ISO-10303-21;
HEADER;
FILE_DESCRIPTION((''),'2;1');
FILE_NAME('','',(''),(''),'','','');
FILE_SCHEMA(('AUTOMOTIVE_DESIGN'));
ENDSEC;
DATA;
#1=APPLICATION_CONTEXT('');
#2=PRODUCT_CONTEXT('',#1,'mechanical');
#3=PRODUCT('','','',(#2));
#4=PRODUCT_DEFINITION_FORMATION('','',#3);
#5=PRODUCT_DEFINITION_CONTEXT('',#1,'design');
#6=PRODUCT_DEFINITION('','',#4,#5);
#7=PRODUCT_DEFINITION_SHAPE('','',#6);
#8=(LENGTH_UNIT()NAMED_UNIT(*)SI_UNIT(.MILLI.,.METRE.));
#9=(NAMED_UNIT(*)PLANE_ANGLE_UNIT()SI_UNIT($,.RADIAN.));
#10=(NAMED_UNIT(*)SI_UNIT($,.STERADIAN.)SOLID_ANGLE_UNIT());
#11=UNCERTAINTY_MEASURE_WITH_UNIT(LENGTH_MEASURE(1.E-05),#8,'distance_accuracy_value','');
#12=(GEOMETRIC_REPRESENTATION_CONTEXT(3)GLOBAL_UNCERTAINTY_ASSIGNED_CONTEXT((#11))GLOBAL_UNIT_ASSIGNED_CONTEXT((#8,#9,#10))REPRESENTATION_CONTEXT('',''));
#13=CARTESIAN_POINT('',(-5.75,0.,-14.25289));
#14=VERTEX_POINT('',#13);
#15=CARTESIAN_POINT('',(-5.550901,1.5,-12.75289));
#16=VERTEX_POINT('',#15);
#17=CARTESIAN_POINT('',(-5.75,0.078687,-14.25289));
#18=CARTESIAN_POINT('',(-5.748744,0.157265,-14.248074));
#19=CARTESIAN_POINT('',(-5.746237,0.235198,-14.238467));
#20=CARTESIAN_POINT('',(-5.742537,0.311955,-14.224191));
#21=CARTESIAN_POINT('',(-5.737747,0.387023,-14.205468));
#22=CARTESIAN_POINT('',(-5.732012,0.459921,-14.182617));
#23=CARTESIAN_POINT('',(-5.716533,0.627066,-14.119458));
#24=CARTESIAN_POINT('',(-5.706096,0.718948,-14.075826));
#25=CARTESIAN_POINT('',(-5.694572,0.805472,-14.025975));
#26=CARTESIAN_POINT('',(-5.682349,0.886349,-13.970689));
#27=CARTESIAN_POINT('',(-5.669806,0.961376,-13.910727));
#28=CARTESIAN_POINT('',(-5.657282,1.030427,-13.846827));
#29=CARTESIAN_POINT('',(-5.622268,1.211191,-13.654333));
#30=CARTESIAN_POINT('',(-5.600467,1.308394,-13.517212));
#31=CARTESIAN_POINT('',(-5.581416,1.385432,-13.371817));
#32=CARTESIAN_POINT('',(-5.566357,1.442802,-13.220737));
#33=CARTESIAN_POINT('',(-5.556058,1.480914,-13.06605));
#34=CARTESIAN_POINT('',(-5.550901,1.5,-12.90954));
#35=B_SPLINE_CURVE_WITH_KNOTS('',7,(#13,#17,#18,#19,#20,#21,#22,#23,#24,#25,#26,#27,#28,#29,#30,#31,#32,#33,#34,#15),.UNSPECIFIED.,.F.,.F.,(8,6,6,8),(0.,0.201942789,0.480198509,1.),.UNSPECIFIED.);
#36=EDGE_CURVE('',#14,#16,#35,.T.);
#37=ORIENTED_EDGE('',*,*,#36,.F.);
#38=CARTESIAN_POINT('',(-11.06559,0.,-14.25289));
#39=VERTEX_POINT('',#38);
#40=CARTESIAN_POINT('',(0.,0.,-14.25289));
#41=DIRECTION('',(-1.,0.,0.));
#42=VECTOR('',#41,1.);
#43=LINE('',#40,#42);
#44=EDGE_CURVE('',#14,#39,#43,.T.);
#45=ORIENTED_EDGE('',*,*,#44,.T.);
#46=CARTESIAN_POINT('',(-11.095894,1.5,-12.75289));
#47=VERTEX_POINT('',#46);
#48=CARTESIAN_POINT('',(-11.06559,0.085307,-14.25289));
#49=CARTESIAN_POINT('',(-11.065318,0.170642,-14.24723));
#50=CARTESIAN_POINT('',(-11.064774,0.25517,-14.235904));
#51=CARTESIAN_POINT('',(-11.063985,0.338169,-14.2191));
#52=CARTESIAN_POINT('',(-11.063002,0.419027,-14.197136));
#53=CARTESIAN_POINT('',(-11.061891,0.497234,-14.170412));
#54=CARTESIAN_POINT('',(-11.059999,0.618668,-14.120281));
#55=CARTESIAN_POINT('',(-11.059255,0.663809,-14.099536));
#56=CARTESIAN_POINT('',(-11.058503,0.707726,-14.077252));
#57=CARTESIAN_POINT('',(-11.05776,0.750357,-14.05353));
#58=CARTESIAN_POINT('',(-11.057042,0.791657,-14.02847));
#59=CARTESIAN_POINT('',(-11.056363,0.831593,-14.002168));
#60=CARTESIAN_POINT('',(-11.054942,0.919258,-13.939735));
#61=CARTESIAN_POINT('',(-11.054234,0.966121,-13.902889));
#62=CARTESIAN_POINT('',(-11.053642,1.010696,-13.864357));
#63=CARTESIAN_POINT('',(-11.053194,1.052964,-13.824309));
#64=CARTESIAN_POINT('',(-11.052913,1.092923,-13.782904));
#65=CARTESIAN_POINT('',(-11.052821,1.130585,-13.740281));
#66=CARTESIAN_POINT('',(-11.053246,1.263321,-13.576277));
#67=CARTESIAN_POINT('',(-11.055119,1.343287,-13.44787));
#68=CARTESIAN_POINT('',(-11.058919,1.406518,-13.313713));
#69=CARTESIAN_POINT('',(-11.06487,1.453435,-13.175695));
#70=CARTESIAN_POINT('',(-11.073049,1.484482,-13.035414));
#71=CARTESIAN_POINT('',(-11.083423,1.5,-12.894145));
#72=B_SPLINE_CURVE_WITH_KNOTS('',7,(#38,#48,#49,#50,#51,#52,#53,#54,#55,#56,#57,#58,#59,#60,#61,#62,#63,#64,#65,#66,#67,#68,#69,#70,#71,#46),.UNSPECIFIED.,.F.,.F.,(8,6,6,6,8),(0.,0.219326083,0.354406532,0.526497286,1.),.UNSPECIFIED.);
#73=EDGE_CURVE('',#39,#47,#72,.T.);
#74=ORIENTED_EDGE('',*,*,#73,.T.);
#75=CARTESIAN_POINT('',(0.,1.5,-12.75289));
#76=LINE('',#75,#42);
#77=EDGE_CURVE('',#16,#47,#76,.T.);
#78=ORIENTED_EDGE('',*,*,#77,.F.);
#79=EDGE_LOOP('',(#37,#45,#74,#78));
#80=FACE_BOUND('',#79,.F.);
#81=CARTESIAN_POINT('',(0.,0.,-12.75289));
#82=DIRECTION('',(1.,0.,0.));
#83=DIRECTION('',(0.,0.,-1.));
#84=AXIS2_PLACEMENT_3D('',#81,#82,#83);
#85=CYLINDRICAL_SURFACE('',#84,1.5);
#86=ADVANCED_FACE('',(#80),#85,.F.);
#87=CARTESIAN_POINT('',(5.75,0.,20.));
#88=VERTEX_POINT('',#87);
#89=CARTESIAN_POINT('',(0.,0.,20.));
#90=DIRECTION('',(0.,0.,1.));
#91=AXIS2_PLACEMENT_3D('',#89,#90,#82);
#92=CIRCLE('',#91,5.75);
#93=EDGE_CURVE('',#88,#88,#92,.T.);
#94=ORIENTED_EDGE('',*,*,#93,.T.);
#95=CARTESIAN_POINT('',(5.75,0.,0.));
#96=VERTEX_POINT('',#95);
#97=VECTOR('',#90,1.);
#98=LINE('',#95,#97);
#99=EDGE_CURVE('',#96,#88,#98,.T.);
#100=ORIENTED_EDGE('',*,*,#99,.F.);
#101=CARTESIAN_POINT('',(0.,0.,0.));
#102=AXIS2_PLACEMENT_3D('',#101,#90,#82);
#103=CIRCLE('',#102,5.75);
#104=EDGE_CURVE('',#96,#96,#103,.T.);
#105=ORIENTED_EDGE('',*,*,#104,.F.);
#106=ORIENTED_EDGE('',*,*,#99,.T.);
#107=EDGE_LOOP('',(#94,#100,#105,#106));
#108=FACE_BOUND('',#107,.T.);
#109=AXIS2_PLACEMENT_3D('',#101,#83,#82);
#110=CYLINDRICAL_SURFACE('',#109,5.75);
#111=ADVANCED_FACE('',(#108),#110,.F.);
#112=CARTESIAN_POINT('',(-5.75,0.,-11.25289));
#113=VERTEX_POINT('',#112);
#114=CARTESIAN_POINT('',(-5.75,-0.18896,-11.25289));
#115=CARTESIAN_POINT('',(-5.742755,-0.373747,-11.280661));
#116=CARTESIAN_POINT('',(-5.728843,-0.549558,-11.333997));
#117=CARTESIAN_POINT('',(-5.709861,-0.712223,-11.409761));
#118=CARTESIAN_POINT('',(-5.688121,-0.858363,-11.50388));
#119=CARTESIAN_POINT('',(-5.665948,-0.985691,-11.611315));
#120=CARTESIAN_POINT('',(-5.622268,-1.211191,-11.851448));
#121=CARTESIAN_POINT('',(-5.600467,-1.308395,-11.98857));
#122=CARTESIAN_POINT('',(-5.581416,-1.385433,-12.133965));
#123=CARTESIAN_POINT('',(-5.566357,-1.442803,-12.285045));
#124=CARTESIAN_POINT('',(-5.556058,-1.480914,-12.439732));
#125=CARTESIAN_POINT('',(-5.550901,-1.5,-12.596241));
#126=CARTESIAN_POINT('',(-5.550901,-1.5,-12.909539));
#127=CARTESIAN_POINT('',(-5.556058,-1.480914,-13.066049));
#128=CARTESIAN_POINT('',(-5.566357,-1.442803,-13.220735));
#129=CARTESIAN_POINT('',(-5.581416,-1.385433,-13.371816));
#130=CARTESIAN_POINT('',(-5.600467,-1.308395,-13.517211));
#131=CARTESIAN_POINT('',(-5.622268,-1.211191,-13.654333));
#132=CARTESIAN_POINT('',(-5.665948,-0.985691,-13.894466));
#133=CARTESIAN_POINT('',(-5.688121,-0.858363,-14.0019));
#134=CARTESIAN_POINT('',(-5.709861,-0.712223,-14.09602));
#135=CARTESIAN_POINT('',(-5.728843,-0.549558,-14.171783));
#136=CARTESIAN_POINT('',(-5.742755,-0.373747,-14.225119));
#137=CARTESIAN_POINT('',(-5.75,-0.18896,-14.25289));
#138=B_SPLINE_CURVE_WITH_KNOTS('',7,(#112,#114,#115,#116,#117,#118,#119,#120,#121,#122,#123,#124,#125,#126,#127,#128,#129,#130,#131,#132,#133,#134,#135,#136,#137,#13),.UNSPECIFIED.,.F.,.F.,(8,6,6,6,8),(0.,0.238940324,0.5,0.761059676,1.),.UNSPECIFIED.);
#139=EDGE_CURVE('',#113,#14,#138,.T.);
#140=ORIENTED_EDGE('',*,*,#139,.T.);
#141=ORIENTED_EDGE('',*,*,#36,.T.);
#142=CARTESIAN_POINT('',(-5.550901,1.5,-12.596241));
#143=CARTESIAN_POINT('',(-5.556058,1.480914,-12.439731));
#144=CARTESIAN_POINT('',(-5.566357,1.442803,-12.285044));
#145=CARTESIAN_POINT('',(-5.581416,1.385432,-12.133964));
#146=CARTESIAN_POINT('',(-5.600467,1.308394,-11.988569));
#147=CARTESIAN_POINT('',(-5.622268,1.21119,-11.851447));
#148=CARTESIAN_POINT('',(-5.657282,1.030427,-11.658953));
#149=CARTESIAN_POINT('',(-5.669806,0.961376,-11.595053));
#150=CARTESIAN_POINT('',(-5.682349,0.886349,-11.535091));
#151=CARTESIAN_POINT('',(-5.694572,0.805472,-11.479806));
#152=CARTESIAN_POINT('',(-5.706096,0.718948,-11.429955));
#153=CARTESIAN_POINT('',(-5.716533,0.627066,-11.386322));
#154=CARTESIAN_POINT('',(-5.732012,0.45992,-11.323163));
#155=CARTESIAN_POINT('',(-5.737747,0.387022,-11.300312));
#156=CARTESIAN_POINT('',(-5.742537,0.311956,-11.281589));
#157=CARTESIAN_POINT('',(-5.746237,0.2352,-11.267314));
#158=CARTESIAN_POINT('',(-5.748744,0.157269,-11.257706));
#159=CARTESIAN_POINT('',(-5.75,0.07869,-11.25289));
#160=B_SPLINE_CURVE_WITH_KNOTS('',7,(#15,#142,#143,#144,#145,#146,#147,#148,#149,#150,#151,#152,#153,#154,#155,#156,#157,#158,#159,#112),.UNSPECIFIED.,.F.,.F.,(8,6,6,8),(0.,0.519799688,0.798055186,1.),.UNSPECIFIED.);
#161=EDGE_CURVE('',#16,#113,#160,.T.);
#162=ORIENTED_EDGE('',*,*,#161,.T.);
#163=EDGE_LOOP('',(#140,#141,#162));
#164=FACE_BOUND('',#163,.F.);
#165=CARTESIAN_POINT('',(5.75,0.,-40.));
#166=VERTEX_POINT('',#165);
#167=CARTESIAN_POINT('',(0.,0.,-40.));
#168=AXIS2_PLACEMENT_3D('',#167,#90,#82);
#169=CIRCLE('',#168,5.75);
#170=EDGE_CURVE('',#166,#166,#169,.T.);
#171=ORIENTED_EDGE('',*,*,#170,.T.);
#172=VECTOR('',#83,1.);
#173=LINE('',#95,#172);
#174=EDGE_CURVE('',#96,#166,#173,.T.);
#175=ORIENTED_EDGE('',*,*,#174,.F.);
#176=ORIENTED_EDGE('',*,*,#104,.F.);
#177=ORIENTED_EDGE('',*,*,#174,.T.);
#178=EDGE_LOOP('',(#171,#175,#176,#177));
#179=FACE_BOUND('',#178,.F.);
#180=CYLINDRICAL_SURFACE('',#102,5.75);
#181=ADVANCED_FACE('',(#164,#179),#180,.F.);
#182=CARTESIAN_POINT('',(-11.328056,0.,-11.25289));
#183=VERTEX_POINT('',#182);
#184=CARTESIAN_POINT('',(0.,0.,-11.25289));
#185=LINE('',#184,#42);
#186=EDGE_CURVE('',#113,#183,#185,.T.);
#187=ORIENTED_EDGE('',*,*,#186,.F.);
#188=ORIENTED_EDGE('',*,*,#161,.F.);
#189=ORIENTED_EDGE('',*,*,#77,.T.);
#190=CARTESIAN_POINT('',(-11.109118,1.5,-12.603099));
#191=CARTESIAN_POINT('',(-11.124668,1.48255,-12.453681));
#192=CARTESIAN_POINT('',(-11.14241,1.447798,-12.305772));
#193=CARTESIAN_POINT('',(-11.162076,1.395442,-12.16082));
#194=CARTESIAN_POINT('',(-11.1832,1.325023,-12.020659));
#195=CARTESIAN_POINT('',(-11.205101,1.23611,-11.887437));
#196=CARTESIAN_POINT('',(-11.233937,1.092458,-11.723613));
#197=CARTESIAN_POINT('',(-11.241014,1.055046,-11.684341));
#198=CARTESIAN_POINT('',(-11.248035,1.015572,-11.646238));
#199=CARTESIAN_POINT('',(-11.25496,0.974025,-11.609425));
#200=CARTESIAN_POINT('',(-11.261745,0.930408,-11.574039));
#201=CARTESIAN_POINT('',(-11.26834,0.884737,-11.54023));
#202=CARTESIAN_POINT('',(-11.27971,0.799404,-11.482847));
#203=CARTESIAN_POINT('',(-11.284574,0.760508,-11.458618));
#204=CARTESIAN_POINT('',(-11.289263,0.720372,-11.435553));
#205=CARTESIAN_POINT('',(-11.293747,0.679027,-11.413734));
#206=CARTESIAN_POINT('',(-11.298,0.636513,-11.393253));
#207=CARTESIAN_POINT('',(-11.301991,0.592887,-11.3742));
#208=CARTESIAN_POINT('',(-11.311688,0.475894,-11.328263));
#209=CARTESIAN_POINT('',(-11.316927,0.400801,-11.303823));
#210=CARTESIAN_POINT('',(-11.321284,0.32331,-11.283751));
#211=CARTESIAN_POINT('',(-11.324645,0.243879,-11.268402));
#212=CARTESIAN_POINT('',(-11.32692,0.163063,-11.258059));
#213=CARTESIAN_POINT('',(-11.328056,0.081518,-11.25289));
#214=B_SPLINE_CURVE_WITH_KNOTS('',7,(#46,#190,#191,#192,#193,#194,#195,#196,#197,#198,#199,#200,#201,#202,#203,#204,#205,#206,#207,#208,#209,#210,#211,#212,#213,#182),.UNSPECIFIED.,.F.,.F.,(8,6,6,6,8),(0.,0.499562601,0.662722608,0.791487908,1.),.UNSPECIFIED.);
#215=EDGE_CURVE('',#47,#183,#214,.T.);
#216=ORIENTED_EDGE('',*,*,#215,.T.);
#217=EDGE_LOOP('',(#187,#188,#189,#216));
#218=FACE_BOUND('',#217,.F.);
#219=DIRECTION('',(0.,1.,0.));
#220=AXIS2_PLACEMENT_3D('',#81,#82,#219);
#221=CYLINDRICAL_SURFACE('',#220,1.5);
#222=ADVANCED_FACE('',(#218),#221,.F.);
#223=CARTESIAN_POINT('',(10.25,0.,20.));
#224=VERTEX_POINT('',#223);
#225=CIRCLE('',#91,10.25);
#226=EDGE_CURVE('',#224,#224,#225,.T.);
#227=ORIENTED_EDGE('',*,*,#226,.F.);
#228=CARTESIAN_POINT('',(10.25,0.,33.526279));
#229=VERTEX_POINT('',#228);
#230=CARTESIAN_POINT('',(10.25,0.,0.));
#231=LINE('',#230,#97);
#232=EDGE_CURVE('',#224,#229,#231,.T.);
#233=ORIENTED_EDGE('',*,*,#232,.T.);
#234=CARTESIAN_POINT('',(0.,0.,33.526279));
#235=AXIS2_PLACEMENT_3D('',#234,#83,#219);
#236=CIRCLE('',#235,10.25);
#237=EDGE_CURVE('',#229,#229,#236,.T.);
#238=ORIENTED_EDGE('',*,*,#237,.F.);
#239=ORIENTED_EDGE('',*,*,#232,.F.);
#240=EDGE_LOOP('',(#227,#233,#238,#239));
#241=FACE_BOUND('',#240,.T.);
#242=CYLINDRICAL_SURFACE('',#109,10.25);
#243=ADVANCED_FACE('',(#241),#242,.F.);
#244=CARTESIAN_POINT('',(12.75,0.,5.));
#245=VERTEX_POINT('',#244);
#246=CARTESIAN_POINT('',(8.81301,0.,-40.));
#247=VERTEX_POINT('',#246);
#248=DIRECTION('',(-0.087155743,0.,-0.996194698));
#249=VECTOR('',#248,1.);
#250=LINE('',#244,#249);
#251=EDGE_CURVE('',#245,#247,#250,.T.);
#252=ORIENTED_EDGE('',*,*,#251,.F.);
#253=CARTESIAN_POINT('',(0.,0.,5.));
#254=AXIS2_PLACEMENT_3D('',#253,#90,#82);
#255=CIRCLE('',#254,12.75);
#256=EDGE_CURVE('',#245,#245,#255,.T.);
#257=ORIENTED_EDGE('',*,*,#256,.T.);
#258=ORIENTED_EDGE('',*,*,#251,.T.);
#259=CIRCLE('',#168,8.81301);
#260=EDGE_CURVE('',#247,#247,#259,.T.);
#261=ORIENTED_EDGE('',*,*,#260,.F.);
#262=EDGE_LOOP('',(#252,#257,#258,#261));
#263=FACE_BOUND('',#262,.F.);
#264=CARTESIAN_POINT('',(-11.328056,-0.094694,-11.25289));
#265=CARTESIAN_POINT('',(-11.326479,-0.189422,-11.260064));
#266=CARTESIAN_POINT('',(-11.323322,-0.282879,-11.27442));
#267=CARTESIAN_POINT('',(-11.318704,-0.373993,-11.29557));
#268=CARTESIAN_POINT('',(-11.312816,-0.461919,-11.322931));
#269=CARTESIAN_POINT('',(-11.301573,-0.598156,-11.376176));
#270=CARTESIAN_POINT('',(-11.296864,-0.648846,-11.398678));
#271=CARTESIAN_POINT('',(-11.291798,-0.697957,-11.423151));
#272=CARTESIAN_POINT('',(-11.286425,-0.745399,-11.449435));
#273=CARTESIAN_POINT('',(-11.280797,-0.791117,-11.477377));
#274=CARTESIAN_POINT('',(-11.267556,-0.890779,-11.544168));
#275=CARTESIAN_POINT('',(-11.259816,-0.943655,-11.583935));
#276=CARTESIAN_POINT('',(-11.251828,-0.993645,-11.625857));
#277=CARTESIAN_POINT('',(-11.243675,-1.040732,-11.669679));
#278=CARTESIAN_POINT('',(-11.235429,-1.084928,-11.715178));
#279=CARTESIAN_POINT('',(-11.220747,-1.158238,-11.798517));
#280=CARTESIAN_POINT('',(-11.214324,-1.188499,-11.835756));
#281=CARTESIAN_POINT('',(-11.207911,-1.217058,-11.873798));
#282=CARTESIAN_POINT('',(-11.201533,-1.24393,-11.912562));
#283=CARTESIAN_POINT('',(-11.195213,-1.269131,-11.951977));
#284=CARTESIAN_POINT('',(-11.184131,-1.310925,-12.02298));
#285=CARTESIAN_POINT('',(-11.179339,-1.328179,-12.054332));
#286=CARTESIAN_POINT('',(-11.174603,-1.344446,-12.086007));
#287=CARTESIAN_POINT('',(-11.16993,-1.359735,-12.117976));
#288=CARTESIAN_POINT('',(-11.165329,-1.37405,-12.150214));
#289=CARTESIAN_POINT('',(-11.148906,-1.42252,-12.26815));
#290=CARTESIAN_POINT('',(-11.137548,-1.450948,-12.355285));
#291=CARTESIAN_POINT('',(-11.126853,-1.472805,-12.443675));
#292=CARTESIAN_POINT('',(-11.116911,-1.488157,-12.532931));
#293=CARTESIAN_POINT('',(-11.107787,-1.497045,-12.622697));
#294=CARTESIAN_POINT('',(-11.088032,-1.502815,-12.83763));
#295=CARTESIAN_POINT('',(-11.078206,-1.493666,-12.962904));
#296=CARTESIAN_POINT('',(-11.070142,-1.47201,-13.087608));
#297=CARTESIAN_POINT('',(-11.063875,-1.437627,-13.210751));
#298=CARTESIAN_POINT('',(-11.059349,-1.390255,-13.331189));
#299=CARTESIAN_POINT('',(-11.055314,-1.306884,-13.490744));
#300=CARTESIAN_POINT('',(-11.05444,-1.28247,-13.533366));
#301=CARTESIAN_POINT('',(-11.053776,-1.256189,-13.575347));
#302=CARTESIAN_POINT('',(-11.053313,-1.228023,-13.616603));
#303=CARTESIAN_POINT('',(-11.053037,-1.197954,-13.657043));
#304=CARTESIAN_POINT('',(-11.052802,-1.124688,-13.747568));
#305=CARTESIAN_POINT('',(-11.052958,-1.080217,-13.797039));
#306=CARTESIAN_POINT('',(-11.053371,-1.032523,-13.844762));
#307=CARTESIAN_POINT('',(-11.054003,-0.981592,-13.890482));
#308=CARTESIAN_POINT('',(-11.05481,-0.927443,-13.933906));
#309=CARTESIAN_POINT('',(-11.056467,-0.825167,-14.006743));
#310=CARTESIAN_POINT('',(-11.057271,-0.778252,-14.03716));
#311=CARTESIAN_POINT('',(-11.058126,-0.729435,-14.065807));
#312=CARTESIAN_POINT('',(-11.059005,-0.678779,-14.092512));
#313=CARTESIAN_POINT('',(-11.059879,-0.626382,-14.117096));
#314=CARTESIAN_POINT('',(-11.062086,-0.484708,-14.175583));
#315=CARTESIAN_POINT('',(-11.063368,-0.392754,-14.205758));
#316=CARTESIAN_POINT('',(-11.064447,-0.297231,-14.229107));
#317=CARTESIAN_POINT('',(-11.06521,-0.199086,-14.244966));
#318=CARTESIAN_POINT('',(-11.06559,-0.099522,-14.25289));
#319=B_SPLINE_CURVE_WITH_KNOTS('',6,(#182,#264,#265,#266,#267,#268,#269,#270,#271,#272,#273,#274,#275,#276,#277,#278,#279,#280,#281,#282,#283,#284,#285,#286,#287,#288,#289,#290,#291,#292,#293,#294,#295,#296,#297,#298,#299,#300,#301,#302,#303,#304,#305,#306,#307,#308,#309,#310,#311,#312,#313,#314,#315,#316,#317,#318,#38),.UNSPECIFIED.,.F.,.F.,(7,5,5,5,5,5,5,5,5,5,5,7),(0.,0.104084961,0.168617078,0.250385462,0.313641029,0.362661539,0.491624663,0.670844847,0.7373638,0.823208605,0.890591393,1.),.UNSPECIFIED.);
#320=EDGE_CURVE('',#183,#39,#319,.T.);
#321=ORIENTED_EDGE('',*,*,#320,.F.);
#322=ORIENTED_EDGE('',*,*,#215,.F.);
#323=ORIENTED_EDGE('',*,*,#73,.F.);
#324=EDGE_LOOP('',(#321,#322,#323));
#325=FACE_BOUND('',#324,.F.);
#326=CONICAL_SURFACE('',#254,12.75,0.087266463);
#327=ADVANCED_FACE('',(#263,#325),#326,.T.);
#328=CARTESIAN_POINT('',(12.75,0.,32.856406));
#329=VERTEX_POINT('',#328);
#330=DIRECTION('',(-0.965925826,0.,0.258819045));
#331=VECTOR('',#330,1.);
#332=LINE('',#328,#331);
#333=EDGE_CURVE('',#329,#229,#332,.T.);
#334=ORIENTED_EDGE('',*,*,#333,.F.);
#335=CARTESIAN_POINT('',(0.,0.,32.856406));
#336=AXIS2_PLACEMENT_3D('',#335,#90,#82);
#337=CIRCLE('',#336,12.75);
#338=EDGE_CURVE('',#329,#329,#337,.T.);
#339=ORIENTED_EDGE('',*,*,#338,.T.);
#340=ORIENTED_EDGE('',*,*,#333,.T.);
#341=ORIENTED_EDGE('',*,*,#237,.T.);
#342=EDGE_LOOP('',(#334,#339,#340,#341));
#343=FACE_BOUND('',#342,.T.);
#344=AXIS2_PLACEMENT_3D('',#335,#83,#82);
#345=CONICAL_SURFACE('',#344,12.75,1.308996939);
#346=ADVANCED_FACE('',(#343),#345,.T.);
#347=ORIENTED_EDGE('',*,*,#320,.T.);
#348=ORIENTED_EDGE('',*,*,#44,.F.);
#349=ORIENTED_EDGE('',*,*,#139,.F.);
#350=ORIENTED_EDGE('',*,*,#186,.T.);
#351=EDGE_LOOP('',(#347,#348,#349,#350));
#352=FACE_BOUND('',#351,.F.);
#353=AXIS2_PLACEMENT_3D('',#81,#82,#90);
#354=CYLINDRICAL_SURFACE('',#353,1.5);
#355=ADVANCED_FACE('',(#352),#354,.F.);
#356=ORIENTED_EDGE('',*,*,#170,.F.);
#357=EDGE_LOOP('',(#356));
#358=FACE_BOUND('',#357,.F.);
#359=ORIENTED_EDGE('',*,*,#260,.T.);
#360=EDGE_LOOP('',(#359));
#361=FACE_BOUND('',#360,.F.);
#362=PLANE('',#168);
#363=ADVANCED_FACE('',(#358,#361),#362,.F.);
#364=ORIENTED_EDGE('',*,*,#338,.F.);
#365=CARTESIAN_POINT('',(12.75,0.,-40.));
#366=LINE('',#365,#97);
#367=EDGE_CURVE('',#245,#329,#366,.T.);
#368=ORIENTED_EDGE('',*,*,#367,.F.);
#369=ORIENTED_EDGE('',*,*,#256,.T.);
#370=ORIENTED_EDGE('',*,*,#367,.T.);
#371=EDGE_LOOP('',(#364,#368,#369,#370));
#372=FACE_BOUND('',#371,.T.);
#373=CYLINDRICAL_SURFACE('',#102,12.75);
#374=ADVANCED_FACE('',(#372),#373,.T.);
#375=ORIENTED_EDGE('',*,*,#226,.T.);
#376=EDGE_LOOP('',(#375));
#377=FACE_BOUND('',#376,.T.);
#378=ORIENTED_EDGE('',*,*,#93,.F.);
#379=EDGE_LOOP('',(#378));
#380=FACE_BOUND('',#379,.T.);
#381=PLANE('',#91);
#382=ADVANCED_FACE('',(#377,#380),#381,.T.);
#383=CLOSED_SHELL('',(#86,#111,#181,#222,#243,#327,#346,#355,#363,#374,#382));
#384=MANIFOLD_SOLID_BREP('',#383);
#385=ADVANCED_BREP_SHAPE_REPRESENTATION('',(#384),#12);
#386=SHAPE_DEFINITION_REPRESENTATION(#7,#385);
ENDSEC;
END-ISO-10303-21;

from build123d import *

# Parameters (mm, degrees)
F0_R     = 10.25
F0_R_2   = 5.75
F1_DEPTH = 20
F0_R_3   = 12.75
F2_DEPTH = 35
F3_DEPTH = 40
F5_SIZE2 = 3.9369898587
F5_SIZE  = 45
F7_DEPTH = 25


# Not quite as in the source:
# - a fillet or chamfer that OpenCascade refuses, or shapes differently, is made with other operations: its cross-section is extruded or revolved along the edge and cut away or added


with BuildPart() as f1:
    # F0 (on Top) → F1 (new body)
    with BuildSketch(Plane.XY):
        Circle(F0_R)
        Circle(F0_R_2, mode=Mode.SUBTRACT)
    extrude(amount=F1_DEPTH)

    # F0 (on Top) → F2 (join)
    with BuildSketch(Plane.XY):
        Circle(F0_R_3)
        Circle(F0_R, mode=Mode.SUBTRACT)
    extrude(amount=F2_DEPTH)

    # F3 (add): a face of the model
    f3_faces = [f1.faces().sort_by_distance(p)[0] for p in [
        (-6.1106244584, 0, 0),
    ]]
    extrude(f3_faces, amount=F3_DEPTH)

    # F4: chamfer of 8 x 2.1435935394 on 1 edges, made by hand

    # F4_s1 → F4_t2 (revolve, cut)
    with BuildSketch(Plane.XZ):
        Polygon((12.75, 32.8564064606), (4.75, 35), (12.75, 35), align=None)
    revolve(axis=Axis((0, 0, 35), (0, 0, 1)), mode=Mode.SUBTRACT)

    # F5
    f5_edges = [f1.edges().sort_by_distance(p)[0] for p in [
        (-12.75, 0, -40),
    ]]
    f5_side = f1.faces().sort_by_distance((-12.75, 0, -3.571797))[0]
    chamfer(f5_edges, length=F5_SIZE, length2=F5_SIZE2, reference=f5_side)

    # F6 (on Right) → F7 (cut)
    with BuildSketch(Plane.YZ):
        with BuildLine():
            ThreePointArc((0, -11.2528902143), (-1.5, -12.7528902143), (0, -14.2528902143))
            Line((0, -14.2528902143), (0, -11.2528902143))
        make_face()
        with BuildLine():
            Line((0, -11.2528902143), (0, -14.2528902143))
            ThreePointArc((0, -14.2528902143), (1.0606601718, -13.8135503861), (1.5, -12.7528902143))
            ThreePointArc((1.5, -12.7528902143), (1.0606601718, -11.6922300425), (0, -11.2528902143))
        make_face()
    extrude(amount=-F7_DEPTH, mode=Mode.SUBTRACT)


solid = f1.part
